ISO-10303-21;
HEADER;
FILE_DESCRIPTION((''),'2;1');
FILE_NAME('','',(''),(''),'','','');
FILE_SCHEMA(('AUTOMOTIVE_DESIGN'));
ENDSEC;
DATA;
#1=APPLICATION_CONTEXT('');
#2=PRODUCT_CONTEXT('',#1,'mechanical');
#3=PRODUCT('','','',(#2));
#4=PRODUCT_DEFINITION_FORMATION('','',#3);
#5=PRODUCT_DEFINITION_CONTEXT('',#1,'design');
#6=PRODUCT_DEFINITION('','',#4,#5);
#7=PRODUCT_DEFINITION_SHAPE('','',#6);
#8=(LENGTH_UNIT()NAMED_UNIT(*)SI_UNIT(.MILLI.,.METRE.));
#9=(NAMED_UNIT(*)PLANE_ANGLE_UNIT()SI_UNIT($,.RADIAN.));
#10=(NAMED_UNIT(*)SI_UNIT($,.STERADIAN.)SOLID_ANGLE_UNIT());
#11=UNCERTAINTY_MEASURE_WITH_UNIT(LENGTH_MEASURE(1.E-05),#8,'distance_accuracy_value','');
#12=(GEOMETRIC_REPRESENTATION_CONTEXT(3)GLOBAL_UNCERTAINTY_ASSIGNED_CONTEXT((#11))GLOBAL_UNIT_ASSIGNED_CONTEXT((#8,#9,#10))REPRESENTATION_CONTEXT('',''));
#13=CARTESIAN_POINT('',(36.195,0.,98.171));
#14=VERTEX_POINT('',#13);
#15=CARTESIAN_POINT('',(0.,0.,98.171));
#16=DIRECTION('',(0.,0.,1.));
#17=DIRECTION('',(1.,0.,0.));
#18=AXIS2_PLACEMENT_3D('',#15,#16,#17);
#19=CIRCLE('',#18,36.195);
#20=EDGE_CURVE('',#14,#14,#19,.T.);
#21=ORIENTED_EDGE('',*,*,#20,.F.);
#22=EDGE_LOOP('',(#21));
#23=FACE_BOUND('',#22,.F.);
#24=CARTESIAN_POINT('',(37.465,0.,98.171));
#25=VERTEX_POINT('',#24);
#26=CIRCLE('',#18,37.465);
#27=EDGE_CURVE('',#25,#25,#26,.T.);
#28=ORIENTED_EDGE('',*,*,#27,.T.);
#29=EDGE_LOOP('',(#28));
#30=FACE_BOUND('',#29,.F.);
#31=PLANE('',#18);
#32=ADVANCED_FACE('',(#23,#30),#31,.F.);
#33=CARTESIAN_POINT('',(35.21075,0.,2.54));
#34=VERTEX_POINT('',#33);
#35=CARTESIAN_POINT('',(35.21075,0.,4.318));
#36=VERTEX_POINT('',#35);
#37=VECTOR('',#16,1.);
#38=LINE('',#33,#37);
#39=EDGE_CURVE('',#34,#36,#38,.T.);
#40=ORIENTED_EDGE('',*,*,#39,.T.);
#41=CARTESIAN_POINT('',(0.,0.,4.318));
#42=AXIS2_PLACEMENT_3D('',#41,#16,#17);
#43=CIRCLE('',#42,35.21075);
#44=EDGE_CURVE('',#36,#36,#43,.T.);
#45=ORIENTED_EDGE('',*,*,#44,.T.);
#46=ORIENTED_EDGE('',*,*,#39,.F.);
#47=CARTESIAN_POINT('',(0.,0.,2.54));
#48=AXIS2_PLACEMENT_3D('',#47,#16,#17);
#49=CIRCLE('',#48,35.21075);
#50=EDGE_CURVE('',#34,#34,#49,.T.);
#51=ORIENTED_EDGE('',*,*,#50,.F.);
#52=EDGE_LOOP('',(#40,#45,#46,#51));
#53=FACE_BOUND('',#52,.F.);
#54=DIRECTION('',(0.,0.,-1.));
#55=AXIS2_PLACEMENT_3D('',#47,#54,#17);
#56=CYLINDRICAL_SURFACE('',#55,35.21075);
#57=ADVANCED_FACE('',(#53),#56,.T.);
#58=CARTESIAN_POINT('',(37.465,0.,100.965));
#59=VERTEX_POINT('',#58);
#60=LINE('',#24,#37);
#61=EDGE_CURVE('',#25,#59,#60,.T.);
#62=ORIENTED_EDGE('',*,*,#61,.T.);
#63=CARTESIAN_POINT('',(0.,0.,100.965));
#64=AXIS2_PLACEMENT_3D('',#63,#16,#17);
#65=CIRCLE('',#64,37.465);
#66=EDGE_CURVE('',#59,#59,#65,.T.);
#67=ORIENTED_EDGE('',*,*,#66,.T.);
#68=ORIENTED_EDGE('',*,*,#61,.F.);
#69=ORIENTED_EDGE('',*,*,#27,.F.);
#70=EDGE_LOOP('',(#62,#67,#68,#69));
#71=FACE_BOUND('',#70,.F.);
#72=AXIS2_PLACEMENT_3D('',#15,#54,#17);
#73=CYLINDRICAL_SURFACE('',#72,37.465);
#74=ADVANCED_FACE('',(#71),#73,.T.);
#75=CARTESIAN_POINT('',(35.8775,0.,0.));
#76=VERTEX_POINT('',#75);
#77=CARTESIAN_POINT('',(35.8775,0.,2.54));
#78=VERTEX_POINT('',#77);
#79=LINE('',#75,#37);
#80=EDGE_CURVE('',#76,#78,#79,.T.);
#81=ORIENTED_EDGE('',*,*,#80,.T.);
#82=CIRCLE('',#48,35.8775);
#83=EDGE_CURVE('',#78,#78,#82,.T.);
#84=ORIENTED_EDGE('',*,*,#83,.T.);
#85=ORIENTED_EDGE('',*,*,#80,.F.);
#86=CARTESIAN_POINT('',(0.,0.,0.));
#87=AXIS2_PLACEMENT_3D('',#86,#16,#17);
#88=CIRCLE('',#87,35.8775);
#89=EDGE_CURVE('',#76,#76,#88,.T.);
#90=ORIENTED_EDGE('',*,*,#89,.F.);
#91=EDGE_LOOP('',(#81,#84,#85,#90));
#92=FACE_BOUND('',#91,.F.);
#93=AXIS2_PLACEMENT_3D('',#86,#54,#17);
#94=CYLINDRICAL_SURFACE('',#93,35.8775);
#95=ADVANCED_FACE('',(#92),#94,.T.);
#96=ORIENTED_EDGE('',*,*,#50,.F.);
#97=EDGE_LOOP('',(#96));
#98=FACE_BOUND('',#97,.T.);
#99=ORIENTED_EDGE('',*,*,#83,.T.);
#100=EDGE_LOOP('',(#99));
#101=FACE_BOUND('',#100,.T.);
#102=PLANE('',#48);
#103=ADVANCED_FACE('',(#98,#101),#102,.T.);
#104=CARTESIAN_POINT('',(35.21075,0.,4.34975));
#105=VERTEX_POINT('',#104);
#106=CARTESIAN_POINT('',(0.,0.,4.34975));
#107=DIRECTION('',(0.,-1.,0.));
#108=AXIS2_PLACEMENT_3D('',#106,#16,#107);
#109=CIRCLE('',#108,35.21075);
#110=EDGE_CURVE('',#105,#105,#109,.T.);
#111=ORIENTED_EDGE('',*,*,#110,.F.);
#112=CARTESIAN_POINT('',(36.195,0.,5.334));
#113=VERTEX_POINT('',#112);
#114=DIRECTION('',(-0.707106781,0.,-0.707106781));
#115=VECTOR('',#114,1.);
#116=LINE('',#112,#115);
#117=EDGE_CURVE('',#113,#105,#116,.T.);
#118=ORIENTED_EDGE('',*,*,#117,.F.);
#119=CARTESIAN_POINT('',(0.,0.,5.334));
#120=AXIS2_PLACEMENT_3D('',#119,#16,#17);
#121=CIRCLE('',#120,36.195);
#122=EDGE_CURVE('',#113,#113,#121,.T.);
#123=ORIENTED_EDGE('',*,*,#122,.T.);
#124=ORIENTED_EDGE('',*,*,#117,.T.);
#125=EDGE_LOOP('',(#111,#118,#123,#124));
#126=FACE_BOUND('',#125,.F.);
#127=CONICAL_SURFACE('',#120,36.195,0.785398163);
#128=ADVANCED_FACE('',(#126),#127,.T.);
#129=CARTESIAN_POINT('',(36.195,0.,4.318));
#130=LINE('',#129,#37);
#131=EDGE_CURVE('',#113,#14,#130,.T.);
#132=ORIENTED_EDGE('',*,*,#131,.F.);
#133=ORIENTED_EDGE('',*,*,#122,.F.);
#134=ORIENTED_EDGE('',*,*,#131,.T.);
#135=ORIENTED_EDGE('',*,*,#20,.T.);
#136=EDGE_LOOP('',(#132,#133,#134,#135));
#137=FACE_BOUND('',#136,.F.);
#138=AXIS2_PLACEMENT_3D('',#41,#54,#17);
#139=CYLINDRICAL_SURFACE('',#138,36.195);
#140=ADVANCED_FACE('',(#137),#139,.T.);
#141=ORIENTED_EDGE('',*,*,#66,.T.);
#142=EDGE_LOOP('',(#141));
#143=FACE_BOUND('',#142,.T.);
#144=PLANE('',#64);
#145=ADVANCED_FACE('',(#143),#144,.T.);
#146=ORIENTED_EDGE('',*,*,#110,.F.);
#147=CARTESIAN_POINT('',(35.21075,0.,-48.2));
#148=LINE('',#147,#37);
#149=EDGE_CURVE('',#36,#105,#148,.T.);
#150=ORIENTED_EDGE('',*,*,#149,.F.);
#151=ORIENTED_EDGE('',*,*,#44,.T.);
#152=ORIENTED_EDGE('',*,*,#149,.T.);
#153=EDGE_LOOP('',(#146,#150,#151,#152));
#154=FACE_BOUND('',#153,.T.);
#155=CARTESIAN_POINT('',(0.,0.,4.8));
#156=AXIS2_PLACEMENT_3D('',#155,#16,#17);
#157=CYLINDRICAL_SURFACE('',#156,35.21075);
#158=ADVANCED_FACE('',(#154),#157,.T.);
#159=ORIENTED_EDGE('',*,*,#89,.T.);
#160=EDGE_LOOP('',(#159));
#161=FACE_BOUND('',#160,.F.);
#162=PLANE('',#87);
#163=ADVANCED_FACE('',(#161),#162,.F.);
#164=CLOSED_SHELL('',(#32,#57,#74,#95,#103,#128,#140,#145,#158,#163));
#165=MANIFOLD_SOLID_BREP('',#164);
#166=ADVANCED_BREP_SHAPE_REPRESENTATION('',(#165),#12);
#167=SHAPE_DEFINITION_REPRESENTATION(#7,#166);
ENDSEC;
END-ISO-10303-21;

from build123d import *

# Parameters (mm, degrees)
F0_R        = 35.8775
F1_DEPTH    = 2.54
F2_R        = 35.21075
F3_DEPTH    = 1.778
F4_R        = 36.195
F5_DEPTH    = 93.853
F6_R        = 37.465
F7_DEPTH    = 2.794
F8_S5_R     = 35.21075
F8_T6_DEPTH = 53


# Not quite as in the source:
# - a fillet or chamfer that OpenCascade refuses, or shapes differently, is made with other operations: its cross-section is extruded or revolved along the edge and cut away or added


with BuildPart() as f1:
    # F0 (on Top) → F1 (new body)
    with BuildSketch(Plane.XY):
        Circle(F0_R)
    extrude(amount=F1_DEPTH)

    # F2 (on face) → F3 (join)
    with BuildSketch(Plane.XY.offset(2.54)):
        Circle(F2_R)
    extrude(amount=F3_DEPTH)

    # F4 (on face) → F5 (join)
    with BuildSketch(Plane.XY.offset(4.318)):
        Circle(F4_R)
    extrude(amount=F5_DEPTH)

    # F6 (on face) → F7 (join)
    with BuildSketch(Plane.XY.offset(98.171)):
        Circle(F6_R)
    extrude(amount=F7_DEPTH)

    # F8: chamfer of 1.016 on 1 edges, made by hand


with BuildPart() as f8_tool2:
    # F8_s3 → F8_t4 (revolve)
    with BuildSketch(Plane.XZ):
        Polygon((36.195, 5.334), (35.179, 4.318), (36.195, 4.318), align=None)
    revolve(axis=Axis((0, 0, 4.318), (0, 0, 1)))

    # F8_s5 → F8_t6 (cut, symmetric)
    with BuildSketch(Plane.XY.offset(4.8)):
        Circle(F8_S5_R)
    extrude(amount=F8_T6_DEPTH, both=True, mode=Mode.SUBTRACT)


with BuildPart() as f1_1:
    add(f1.part)

    # F8_t1: cut F8_tool2
    add(f8_tool2.part, mode=Mode.SUBTRACT)


solid = f1_1.part
